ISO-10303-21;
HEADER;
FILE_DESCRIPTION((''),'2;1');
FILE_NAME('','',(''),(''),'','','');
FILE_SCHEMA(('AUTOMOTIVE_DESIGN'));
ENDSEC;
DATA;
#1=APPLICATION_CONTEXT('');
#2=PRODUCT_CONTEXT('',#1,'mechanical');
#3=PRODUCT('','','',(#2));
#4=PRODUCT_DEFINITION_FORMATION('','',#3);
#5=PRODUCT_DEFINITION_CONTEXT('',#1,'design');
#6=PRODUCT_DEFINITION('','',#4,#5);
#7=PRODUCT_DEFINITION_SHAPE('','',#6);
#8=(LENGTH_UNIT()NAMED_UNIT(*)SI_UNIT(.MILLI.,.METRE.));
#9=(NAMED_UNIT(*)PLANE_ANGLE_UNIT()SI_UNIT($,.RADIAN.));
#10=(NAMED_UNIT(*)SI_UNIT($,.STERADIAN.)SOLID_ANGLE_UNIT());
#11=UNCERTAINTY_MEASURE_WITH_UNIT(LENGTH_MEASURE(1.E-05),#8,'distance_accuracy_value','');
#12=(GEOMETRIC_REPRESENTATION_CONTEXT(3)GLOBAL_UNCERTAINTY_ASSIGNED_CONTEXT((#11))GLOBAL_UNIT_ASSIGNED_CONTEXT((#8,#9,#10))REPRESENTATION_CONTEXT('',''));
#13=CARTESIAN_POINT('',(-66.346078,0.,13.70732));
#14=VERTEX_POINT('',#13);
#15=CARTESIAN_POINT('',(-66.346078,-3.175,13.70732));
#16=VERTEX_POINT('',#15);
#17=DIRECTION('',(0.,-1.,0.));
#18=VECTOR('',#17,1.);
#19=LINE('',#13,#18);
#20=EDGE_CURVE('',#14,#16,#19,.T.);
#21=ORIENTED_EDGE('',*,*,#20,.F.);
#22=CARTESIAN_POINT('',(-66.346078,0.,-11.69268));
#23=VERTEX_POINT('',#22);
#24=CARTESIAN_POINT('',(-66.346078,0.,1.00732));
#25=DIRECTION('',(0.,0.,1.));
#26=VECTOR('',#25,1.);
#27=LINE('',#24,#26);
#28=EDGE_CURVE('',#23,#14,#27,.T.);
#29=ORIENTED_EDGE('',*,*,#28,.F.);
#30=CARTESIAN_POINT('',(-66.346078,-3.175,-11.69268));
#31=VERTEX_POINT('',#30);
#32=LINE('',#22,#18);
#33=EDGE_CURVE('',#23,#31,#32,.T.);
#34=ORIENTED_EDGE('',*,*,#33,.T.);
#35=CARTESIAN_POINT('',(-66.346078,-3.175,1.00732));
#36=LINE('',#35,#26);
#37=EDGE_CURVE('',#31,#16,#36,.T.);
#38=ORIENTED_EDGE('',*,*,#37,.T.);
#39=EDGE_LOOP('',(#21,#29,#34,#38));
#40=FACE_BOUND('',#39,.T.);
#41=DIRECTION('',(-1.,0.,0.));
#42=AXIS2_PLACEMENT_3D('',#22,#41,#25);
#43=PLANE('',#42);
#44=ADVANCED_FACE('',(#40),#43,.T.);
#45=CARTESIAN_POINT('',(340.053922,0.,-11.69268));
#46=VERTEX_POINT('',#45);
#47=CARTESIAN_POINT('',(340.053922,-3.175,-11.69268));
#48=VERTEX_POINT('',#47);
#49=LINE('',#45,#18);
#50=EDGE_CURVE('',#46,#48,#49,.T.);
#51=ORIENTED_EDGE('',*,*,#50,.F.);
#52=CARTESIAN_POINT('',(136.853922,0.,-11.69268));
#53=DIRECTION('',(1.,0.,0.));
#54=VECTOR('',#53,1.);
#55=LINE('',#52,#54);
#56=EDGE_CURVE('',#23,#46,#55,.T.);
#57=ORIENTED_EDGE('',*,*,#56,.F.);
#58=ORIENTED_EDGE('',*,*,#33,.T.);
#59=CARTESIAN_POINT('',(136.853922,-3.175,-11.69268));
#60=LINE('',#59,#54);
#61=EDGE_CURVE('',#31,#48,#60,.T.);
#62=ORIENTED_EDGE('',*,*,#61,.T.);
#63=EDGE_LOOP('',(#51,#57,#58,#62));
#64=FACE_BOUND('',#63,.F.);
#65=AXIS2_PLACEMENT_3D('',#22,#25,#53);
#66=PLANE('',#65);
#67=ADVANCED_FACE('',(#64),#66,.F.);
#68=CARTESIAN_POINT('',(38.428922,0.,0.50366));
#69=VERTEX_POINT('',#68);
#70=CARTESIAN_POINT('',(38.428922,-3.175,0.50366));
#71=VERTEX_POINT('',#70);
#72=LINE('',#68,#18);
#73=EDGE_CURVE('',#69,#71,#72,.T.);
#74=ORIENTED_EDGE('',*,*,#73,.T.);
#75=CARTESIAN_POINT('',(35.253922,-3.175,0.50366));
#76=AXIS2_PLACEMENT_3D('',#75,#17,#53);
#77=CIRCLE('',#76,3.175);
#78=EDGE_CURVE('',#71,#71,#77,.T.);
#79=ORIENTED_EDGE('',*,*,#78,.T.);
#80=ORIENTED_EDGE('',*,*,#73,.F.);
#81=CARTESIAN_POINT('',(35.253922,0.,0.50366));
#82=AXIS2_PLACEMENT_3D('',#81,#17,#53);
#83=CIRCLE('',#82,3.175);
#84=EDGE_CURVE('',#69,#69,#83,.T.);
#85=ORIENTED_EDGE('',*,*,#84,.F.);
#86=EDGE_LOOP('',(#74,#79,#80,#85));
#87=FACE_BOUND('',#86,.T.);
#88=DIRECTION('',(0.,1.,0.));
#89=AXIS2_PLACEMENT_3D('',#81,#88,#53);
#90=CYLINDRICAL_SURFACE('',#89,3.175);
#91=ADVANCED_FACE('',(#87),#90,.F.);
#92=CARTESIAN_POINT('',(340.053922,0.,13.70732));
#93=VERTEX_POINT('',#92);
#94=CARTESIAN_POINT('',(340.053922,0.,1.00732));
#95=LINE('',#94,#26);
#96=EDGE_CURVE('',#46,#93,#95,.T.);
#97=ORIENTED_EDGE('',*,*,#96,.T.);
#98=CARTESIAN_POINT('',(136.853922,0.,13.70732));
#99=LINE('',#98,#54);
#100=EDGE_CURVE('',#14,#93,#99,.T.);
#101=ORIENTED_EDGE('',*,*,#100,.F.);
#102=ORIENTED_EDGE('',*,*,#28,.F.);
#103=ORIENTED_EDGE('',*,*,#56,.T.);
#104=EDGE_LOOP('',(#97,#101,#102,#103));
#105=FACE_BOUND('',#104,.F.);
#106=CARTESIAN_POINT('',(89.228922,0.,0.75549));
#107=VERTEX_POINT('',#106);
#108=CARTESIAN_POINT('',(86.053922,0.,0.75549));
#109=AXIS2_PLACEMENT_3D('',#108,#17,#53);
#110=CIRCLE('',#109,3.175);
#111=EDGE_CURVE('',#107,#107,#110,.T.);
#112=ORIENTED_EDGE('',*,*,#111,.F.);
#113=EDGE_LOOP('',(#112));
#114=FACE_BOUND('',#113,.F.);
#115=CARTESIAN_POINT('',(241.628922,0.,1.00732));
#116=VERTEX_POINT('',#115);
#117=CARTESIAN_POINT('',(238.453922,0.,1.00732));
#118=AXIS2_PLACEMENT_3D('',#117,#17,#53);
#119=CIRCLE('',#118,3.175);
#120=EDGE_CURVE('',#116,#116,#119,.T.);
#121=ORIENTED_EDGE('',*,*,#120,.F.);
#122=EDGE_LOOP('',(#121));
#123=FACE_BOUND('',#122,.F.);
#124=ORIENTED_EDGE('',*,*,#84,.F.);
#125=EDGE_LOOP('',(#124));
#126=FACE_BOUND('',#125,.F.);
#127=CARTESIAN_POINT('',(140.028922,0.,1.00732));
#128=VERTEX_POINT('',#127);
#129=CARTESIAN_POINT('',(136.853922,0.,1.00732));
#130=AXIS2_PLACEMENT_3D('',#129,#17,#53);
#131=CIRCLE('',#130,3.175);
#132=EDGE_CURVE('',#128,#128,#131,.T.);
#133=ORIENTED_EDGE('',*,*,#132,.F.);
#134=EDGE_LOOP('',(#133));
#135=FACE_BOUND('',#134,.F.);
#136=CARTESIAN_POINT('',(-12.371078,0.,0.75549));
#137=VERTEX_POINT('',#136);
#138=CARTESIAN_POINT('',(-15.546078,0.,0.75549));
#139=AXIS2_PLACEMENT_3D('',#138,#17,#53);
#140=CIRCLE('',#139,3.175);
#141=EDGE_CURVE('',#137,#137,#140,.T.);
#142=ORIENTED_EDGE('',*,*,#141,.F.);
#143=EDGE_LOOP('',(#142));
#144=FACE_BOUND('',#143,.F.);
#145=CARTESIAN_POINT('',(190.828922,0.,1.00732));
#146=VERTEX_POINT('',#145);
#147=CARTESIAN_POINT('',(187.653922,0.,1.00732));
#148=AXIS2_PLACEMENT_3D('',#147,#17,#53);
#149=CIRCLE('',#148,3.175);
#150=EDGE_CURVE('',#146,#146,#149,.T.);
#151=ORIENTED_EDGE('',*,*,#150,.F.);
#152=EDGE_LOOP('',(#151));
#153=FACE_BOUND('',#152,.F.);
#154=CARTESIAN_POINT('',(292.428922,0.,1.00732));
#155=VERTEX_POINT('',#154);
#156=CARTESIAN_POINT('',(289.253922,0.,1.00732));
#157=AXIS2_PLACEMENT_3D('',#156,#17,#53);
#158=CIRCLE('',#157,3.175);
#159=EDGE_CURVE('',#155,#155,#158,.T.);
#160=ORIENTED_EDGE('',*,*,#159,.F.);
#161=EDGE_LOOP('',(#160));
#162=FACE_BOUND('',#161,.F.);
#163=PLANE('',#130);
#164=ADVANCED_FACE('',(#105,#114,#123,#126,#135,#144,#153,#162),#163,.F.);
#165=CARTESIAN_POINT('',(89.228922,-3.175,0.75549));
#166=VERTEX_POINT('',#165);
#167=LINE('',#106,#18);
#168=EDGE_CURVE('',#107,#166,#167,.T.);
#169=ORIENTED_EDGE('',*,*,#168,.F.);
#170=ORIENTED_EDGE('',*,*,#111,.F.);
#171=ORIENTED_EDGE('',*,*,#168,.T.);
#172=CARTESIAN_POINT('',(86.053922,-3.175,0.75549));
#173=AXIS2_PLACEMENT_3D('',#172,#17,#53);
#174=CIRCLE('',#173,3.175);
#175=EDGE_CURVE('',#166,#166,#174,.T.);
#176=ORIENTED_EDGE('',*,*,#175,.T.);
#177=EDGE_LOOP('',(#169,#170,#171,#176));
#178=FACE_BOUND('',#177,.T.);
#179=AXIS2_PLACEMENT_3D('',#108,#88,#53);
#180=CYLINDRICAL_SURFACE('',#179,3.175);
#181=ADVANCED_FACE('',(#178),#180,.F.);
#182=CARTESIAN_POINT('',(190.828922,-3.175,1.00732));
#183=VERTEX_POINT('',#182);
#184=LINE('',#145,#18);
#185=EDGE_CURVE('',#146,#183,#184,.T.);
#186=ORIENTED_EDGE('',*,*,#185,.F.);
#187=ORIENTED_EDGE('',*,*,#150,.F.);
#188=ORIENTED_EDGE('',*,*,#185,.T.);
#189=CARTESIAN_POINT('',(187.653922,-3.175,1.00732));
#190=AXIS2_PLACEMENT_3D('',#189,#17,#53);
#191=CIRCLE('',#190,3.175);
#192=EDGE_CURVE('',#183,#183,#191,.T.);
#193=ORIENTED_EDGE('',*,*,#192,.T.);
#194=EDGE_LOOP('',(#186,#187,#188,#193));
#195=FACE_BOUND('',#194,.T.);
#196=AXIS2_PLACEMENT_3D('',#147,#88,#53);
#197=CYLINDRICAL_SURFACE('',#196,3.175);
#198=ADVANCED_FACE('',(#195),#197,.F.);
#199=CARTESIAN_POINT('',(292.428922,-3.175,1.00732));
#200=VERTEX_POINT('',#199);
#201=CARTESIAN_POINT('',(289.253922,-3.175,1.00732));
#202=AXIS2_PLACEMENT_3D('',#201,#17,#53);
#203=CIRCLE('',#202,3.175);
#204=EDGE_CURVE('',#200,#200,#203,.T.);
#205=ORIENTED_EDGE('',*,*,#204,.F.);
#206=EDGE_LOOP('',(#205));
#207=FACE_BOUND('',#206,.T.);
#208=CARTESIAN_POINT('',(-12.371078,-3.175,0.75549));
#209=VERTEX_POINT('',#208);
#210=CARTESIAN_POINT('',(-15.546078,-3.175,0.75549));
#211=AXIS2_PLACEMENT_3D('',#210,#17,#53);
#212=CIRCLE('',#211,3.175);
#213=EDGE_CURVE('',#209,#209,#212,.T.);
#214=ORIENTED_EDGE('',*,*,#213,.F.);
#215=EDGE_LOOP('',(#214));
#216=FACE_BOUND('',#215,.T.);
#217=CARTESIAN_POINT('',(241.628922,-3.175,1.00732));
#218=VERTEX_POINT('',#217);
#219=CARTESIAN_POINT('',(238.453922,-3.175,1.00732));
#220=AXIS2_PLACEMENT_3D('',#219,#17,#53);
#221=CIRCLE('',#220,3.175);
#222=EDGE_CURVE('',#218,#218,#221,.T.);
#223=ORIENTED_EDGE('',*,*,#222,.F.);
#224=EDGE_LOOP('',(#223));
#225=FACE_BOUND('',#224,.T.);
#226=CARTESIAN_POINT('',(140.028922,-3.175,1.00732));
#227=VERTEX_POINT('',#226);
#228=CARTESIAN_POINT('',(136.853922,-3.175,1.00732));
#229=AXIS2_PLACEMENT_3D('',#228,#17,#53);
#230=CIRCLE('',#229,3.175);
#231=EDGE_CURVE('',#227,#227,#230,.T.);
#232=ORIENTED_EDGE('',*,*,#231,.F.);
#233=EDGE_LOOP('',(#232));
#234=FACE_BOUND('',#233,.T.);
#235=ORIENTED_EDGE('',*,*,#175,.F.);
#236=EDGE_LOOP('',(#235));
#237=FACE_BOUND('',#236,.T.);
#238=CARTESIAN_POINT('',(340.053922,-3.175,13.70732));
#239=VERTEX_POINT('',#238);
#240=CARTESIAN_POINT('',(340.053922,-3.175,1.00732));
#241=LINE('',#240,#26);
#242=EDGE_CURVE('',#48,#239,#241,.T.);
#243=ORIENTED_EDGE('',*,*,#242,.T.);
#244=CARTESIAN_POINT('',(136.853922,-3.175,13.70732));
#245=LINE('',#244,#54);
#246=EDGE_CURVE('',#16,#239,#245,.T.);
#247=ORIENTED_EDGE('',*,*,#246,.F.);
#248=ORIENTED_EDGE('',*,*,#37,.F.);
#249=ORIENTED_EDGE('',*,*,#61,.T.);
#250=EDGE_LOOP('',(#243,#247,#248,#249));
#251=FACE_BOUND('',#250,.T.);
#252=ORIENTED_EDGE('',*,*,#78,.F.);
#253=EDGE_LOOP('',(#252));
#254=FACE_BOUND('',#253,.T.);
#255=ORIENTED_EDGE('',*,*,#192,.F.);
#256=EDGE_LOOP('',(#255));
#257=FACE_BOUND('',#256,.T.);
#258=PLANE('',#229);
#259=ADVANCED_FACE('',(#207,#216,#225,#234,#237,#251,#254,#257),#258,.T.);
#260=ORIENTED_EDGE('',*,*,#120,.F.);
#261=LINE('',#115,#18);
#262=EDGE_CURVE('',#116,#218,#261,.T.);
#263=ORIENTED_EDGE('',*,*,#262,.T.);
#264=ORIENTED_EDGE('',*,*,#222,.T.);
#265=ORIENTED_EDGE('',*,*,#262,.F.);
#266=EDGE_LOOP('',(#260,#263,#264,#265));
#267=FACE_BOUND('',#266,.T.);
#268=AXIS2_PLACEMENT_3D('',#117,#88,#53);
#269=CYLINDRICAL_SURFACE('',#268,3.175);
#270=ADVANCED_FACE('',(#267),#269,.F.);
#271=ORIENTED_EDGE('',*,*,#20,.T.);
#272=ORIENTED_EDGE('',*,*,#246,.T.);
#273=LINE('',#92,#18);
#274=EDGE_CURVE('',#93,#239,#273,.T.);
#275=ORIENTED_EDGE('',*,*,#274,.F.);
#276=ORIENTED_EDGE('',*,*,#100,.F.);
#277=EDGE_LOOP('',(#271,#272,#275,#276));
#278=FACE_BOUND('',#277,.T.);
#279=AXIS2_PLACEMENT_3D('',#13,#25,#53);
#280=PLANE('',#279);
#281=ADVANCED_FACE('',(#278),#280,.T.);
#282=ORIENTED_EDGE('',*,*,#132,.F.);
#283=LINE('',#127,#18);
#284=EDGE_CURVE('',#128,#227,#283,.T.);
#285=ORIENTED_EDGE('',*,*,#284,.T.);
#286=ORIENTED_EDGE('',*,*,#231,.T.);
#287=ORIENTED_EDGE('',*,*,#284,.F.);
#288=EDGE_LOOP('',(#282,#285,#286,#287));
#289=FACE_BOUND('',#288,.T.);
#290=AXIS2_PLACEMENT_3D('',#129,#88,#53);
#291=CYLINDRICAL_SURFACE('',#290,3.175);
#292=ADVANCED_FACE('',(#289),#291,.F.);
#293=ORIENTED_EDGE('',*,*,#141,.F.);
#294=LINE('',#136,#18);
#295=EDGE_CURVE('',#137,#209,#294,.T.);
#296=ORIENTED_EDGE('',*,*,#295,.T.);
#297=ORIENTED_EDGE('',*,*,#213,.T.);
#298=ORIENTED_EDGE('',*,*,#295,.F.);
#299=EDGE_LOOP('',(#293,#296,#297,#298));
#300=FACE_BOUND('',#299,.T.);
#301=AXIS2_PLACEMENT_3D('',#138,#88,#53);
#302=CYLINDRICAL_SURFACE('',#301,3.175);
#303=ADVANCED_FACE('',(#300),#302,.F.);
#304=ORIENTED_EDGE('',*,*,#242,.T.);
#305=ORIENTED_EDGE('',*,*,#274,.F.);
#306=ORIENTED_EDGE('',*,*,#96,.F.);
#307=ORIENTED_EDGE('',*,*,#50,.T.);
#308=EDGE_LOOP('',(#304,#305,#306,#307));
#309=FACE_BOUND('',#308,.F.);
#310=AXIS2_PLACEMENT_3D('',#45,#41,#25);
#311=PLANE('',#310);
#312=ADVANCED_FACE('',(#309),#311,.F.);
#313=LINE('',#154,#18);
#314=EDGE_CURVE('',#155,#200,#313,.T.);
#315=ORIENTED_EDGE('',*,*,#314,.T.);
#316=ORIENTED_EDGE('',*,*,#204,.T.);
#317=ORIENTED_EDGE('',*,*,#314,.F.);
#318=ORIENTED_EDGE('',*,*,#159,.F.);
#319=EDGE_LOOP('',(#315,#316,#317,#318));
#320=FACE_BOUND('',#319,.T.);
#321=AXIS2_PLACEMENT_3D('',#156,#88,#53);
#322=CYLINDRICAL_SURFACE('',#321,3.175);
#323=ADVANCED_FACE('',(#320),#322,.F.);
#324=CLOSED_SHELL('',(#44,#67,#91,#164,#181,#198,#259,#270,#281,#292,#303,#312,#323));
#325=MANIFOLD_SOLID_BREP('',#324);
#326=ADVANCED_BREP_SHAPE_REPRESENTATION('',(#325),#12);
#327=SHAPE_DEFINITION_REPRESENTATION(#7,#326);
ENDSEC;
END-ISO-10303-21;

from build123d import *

# Parameters (mm, degrees)
F0_W     = 406.4
F0_H     = 25.4
F0_R     = 3.175
F1_DEPTH = 3.175


# Not quite as in the source:
# - a length typed as a fraction of an inch, garbled in the dataset ("3 / 203.2 mm" for 3/8 in), is restored


with BuildPart() as f1:
    # F0 (on Front) → F1 (new body)
    with BuildSketch(Plane.XZ):
        with Locations((136.8539219917, 1.0073203593)):
            Rectangle(F0_W, F0_H)
        with Locations((-15.5460780083, 0.7554902695)):
            Circle(F0_R, mode=Mode.SUBTRACT)
        with Locations((35.2539219917, 0.5036601797)):
            Circle(F0_R, mode=Mode.SUBTRACT)
        with Locations((86.0539219917, 0.7554902695)):
            Circle(F0_R, mode=Mode.SUBTRACT)
        with Locations((136.8539219917, 1.0073203593)):
            Circle(F0_R, mode=Mode.SUBTRACT)
        with Locations((187.6539219917, 1.0073203593)):
            Circle(F0_R, mode=Mode.SUBTRACT)
        with Locations((238.4539219917, 1.0073203593)):
            Circle(F0_R, mode=Mode.SUBTRACT)
        with Locations((289.2539219917, 1.0073203593)):
            Circle(F0_R, mode=Mode.SUBTRACT)
    extrude(amount=F1_DEPTH)


solid = f1.part
